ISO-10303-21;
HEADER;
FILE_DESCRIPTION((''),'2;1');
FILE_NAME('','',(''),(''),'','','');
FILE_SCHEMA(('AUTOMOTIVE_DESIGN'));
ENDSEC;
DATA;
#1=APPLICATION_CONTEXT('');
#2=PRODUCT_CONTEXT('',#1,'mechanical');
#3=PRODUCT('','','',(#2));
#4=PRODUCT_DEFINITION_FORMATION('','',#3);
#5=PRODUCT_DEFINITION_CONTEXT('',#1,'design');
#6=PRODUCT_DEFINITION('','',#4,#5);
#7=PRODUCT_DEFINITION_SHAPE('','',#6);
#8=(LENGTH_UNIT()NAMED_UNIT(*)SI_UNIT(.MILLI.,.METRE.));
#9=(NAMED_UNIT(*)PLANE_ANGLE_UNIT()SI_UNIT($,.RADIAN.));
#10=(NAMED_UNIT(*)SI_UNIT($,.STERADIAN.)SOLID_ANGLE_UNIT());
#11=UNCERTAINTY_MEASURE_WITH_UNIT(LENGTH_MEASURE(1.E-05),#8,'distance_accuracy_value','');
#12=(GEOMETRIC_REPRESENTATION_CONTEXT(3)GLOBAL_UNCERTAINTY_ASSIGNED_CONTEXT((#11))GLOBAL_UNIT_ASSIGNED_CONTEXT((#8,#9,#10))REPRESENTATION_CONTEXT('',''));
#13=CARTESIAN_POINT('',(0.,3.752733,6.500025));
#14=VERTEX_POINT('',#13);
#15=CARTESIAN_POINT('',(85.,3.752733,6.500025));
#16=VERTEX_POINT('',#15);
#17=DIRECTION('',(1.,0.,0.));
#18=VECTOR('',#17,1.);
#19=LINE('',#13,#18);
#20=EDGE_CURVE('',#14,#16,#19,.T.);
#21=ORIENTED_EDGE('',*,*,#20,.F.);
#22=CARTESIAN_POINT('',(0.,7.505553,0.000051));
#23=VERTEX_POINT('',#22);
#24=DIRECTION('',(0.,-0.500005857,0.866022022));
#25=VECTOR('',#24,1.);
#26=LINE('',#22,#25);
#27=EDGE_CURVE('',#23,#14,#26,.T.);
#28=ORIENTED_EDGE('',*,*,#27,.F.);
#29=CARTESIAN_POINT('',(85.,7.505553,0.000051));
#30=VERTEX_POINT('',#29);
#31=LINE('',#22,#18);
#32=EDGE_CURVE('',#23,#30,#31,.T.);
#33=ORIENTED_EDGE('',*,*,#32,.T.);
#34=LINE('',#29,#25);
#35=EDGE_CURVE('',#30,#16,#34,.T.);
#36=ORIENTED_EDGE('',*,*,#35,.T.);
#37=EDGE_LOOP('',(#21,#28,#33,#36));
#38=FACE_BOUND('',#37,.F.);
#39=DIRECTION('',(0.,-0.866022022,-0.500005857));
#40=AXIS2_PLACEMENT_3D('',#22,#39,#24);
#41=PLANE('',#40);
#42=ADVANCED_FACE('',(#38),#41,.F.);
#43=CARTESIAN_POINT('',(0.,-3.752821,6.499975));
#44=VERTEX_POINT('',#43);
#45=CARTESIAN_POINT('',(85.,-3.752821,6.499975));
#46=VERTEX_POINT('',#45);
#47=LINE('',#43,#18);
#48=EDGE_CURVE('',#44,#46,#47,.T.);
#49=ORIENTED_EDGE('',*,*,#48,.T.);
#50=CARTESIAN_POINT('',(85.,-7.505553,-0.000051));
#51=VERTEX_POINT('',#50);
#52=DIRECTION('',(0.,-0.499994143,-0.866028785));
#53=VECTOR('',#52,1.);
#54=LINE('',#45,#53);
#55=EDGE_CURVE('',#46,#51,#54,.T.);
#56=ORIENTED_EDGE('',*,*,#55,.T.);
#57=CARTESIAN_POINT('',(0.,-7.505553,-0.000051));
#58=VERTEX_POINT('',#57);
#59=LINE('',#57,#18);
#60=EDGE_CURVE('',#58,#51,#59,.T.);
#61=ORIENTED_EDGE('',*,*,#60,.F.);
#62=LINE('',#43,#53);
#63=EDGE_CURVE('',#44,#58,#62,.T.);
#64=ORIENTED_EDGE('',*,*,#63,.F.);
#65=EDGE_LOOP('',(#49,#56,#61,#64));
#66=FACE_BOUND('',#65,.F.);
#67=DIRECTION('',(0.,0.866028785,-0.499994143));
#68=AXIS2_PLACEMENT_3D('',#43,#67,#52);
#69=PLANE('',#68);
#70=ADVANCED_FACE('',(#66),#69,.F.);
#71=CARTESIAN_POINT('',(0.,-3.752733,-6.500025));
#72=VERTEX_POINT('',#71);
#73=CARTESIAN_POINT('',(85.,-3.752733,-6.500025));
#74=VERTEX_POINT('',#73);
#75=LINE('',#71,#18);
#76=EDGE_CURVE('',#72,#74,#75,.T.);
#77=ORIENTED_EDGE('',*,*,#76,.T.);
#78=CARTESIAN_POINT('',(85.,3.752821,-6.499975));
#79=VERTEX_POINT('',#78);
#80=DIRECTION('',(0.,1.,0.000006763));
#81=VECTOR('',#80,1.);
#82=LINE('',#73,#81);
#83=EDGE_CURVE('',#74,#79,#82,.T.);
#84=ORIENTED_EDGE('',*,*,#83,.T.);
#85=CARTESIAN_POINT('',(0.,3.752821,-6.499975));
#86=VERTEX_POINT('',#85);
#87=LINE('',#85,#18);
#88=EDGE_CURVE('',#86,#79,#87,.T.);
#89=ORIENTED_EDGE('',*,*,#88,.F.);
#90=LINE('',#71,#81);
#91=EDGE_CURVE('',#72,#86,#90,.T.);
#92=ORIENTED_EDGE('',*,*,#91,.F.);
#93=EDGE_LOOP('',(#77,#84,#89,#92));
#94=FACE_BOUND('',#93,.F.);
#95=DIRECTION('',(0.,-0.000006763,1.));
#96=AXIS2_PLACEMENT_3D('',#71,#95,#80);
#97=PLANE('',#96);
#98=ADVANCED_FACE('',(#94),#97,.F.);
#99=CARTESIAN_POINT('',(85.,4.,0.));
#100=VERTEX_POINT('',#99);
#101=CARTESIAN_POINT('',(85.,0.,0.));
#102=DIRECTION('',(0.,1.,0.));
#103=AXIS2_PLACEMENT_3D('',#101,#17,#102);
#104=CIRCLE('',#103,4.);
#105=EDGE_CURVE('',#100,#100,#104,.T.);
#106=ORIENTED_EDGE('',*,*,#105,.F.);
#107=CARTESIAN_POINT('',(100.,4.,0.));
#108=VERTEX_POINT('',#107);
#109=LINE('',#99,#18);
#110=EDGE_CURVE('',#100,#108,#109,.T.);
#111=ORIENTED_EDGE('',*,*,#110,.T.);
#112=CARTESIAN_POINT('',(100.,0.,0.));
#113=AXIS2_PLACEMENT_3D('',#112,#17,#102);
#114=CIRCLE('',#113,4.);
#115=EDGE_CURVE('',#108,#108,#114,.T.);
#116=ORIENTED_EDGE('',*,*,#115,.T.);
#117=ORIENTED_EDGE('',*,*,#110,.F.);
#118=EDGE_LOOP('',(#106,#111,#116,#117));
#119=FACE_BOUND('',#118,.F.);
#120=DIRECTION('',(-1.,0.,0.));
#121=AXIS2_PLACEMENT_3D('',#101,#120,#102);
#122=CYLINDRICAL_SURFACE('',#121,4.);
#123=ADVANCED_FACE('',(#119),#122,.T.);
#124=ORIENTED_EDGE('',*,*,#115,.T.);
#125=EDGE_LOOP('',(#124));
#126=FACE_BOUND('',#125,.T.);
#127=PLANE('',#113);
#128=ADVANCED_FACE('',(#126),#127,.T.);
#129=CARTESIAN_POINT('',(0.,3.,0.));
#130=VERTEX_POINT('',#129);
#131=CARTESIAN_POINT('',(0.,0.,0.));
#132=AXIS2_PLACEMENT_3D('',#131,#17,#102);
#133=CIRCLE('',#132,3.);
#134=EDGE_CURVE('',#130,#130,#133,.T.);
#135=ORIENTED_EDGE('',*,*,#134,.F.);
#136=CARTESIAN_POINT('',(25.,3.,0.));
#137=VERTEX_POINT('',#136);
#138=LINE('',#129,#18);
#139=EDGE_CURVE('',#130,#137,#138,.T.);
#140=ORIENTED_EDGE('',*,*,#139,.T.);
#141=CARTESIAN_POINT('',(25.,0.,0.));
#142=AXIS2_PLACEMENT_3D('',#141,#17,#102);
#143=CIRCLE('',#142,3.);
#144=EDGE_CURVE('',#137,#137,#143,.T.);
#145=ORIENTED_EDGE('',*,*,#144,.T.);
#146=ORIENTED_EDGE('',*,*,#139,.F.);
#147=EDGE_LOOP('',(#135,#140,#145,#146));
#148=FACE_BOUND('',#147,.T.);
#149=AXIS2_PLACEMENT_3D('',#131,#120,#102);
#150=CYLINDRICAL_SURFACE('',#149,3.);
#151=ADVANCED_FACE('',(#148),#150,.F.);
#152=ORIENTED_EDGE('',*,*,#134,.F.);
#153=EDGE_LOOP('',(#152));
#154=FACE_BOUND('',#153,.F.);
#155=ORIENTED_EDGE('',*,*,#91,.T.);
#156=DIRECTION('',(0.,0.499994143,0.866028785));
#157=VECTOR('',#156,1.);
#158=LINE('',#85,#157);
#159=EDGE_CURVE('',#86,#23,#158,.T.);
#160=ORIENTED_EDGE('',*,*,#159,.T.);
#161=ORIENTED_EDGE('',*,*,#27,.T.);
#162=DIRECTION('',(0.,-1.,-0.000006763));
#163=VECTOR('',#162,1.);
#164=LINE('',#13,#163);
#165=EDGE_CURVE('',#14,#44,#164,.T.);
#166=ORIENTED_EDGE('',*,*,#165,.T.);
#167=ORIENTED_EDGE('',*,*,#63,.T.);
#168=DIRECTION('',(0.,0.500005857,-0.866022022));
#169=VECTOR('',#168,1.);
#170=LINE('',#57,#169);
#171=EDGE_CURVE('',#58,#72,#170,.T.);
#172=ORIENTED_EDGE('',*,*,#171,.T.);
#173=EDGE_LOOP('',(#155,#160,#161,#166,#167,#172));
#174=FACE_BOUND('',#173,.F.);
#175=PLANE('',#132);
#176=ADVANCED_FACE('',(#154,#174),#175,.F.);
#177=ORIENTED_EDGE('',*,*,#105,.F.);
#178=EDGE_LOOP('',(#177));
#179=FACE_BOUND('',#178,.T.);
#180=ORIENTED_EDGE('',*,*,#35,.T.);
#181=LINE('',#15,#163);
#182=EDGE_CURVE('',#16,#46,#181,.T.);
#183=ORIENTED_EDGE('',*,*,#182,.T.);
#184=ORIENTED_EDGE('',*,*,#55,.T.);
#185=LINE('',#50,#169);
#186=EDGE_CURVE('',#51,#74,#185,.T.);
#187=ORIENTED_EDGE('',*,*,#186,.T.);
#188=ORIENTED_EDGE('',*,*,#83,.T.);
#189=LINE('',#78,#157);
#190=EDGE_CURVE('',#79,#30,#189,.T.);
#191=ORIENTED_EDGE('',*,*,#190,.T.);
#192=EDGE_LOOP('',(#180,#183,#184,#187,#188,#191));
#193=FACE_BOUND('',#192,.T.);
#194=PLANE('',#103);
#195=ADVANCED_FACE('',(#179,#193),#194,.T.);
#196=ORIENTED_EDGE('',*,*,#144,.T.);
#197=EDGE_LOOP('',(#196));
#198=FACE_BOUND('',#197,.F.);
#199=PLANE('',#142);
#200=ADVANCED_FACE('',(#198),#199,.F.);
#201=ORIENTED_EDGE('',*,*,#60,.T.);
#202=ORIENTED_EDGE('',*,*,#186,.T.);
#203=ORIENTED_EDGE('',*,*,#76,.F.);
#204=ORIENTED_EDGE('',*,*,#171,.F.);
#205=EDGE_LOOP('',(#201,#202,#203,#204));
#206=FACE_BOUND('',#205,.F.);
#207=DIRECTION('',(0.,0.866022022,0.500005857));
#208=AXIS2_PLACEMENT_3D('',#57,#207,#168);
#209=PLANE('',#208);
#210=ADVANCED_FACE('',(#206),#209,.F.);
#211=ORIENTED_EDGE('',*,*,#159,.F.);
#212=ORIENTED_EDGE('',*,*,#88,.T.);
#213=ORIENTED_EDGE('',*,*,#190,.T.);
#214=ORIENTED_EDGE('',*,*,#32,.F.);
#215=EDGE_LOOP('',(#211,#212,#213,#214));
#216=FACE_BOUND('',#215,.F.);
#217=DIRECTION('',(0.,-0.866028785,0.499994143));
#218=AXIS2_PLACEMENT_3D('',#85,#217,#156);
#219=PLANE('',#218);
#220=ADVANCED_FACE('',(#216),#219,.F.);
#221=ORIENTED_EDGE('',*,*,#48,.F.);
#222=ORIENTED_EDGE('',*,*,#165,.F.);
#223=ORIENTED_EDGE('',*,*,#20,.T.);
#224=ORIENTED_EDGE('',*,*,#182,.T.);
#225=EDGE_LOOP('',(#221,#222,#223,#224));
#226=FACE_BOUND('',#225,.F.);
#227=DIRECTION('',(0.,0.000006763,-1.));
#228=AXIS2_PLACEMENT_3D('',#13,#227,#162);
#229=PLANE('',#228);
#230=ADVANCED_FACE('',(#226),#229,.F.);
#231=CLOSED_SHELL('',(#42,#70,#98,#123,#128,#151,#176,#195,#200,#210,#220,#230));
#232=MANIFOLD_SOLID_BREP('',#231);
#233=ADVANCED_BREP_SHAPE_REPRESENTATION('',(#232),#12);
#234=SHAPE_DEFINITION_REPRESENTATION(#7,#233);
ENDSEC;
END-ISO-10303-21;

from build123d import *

# Parameters (mm, degrees)
F0_R     = 4
F0_R_2   = 3
F1_DEPTH = 85
F2_DEPTH = 25
F3_START = 85
F3_DEPTH = 15


# Not quite as in the source:
# - a feature names something its author has since deleted; it is built from what else it names


with BuildPart() as f1:
    # F0 (on Right) → F1 (new body)
    with BuildSketch(Plane.YZ):
        Polygon((-3.7528207105, 6.4999746191), (-7.5055534993, -5.07616e-05), (-3.7527327888, -6.5000253806), (3.7528207105, -6.4999746191), (7.5055534993, 5.07616e-05), (3.7527327888, 6.5000253806), align=None)
        Circle(F0_R, mode=Mode.SUBTRACT)
        Circle(F0_R)
        Circle(F0_R_2, mode=Mode.SUBTRACT)
        Circle(F0_R_2)
    extrude(amount=F1_DEPTH)

    # F0 (on Right) → F2 (cut)
    with BuildSketch(Plane.YZ):
        Circle(F0_R_2)
    extrude(amount=F2_DEPTH, mode=Mode.SUBTRACT)

    # F0 (on Right) → F3 (join)
    with BuildSketch(Plane.YZ.offset(F3_START)):
        Circle(F0_R)
        Circle(F0_R_2, mode=Mode.SUBTRACT)
        Circle(F0_R_2)
    extrude(amount=F3_DEPTH)


solid = f1.part
